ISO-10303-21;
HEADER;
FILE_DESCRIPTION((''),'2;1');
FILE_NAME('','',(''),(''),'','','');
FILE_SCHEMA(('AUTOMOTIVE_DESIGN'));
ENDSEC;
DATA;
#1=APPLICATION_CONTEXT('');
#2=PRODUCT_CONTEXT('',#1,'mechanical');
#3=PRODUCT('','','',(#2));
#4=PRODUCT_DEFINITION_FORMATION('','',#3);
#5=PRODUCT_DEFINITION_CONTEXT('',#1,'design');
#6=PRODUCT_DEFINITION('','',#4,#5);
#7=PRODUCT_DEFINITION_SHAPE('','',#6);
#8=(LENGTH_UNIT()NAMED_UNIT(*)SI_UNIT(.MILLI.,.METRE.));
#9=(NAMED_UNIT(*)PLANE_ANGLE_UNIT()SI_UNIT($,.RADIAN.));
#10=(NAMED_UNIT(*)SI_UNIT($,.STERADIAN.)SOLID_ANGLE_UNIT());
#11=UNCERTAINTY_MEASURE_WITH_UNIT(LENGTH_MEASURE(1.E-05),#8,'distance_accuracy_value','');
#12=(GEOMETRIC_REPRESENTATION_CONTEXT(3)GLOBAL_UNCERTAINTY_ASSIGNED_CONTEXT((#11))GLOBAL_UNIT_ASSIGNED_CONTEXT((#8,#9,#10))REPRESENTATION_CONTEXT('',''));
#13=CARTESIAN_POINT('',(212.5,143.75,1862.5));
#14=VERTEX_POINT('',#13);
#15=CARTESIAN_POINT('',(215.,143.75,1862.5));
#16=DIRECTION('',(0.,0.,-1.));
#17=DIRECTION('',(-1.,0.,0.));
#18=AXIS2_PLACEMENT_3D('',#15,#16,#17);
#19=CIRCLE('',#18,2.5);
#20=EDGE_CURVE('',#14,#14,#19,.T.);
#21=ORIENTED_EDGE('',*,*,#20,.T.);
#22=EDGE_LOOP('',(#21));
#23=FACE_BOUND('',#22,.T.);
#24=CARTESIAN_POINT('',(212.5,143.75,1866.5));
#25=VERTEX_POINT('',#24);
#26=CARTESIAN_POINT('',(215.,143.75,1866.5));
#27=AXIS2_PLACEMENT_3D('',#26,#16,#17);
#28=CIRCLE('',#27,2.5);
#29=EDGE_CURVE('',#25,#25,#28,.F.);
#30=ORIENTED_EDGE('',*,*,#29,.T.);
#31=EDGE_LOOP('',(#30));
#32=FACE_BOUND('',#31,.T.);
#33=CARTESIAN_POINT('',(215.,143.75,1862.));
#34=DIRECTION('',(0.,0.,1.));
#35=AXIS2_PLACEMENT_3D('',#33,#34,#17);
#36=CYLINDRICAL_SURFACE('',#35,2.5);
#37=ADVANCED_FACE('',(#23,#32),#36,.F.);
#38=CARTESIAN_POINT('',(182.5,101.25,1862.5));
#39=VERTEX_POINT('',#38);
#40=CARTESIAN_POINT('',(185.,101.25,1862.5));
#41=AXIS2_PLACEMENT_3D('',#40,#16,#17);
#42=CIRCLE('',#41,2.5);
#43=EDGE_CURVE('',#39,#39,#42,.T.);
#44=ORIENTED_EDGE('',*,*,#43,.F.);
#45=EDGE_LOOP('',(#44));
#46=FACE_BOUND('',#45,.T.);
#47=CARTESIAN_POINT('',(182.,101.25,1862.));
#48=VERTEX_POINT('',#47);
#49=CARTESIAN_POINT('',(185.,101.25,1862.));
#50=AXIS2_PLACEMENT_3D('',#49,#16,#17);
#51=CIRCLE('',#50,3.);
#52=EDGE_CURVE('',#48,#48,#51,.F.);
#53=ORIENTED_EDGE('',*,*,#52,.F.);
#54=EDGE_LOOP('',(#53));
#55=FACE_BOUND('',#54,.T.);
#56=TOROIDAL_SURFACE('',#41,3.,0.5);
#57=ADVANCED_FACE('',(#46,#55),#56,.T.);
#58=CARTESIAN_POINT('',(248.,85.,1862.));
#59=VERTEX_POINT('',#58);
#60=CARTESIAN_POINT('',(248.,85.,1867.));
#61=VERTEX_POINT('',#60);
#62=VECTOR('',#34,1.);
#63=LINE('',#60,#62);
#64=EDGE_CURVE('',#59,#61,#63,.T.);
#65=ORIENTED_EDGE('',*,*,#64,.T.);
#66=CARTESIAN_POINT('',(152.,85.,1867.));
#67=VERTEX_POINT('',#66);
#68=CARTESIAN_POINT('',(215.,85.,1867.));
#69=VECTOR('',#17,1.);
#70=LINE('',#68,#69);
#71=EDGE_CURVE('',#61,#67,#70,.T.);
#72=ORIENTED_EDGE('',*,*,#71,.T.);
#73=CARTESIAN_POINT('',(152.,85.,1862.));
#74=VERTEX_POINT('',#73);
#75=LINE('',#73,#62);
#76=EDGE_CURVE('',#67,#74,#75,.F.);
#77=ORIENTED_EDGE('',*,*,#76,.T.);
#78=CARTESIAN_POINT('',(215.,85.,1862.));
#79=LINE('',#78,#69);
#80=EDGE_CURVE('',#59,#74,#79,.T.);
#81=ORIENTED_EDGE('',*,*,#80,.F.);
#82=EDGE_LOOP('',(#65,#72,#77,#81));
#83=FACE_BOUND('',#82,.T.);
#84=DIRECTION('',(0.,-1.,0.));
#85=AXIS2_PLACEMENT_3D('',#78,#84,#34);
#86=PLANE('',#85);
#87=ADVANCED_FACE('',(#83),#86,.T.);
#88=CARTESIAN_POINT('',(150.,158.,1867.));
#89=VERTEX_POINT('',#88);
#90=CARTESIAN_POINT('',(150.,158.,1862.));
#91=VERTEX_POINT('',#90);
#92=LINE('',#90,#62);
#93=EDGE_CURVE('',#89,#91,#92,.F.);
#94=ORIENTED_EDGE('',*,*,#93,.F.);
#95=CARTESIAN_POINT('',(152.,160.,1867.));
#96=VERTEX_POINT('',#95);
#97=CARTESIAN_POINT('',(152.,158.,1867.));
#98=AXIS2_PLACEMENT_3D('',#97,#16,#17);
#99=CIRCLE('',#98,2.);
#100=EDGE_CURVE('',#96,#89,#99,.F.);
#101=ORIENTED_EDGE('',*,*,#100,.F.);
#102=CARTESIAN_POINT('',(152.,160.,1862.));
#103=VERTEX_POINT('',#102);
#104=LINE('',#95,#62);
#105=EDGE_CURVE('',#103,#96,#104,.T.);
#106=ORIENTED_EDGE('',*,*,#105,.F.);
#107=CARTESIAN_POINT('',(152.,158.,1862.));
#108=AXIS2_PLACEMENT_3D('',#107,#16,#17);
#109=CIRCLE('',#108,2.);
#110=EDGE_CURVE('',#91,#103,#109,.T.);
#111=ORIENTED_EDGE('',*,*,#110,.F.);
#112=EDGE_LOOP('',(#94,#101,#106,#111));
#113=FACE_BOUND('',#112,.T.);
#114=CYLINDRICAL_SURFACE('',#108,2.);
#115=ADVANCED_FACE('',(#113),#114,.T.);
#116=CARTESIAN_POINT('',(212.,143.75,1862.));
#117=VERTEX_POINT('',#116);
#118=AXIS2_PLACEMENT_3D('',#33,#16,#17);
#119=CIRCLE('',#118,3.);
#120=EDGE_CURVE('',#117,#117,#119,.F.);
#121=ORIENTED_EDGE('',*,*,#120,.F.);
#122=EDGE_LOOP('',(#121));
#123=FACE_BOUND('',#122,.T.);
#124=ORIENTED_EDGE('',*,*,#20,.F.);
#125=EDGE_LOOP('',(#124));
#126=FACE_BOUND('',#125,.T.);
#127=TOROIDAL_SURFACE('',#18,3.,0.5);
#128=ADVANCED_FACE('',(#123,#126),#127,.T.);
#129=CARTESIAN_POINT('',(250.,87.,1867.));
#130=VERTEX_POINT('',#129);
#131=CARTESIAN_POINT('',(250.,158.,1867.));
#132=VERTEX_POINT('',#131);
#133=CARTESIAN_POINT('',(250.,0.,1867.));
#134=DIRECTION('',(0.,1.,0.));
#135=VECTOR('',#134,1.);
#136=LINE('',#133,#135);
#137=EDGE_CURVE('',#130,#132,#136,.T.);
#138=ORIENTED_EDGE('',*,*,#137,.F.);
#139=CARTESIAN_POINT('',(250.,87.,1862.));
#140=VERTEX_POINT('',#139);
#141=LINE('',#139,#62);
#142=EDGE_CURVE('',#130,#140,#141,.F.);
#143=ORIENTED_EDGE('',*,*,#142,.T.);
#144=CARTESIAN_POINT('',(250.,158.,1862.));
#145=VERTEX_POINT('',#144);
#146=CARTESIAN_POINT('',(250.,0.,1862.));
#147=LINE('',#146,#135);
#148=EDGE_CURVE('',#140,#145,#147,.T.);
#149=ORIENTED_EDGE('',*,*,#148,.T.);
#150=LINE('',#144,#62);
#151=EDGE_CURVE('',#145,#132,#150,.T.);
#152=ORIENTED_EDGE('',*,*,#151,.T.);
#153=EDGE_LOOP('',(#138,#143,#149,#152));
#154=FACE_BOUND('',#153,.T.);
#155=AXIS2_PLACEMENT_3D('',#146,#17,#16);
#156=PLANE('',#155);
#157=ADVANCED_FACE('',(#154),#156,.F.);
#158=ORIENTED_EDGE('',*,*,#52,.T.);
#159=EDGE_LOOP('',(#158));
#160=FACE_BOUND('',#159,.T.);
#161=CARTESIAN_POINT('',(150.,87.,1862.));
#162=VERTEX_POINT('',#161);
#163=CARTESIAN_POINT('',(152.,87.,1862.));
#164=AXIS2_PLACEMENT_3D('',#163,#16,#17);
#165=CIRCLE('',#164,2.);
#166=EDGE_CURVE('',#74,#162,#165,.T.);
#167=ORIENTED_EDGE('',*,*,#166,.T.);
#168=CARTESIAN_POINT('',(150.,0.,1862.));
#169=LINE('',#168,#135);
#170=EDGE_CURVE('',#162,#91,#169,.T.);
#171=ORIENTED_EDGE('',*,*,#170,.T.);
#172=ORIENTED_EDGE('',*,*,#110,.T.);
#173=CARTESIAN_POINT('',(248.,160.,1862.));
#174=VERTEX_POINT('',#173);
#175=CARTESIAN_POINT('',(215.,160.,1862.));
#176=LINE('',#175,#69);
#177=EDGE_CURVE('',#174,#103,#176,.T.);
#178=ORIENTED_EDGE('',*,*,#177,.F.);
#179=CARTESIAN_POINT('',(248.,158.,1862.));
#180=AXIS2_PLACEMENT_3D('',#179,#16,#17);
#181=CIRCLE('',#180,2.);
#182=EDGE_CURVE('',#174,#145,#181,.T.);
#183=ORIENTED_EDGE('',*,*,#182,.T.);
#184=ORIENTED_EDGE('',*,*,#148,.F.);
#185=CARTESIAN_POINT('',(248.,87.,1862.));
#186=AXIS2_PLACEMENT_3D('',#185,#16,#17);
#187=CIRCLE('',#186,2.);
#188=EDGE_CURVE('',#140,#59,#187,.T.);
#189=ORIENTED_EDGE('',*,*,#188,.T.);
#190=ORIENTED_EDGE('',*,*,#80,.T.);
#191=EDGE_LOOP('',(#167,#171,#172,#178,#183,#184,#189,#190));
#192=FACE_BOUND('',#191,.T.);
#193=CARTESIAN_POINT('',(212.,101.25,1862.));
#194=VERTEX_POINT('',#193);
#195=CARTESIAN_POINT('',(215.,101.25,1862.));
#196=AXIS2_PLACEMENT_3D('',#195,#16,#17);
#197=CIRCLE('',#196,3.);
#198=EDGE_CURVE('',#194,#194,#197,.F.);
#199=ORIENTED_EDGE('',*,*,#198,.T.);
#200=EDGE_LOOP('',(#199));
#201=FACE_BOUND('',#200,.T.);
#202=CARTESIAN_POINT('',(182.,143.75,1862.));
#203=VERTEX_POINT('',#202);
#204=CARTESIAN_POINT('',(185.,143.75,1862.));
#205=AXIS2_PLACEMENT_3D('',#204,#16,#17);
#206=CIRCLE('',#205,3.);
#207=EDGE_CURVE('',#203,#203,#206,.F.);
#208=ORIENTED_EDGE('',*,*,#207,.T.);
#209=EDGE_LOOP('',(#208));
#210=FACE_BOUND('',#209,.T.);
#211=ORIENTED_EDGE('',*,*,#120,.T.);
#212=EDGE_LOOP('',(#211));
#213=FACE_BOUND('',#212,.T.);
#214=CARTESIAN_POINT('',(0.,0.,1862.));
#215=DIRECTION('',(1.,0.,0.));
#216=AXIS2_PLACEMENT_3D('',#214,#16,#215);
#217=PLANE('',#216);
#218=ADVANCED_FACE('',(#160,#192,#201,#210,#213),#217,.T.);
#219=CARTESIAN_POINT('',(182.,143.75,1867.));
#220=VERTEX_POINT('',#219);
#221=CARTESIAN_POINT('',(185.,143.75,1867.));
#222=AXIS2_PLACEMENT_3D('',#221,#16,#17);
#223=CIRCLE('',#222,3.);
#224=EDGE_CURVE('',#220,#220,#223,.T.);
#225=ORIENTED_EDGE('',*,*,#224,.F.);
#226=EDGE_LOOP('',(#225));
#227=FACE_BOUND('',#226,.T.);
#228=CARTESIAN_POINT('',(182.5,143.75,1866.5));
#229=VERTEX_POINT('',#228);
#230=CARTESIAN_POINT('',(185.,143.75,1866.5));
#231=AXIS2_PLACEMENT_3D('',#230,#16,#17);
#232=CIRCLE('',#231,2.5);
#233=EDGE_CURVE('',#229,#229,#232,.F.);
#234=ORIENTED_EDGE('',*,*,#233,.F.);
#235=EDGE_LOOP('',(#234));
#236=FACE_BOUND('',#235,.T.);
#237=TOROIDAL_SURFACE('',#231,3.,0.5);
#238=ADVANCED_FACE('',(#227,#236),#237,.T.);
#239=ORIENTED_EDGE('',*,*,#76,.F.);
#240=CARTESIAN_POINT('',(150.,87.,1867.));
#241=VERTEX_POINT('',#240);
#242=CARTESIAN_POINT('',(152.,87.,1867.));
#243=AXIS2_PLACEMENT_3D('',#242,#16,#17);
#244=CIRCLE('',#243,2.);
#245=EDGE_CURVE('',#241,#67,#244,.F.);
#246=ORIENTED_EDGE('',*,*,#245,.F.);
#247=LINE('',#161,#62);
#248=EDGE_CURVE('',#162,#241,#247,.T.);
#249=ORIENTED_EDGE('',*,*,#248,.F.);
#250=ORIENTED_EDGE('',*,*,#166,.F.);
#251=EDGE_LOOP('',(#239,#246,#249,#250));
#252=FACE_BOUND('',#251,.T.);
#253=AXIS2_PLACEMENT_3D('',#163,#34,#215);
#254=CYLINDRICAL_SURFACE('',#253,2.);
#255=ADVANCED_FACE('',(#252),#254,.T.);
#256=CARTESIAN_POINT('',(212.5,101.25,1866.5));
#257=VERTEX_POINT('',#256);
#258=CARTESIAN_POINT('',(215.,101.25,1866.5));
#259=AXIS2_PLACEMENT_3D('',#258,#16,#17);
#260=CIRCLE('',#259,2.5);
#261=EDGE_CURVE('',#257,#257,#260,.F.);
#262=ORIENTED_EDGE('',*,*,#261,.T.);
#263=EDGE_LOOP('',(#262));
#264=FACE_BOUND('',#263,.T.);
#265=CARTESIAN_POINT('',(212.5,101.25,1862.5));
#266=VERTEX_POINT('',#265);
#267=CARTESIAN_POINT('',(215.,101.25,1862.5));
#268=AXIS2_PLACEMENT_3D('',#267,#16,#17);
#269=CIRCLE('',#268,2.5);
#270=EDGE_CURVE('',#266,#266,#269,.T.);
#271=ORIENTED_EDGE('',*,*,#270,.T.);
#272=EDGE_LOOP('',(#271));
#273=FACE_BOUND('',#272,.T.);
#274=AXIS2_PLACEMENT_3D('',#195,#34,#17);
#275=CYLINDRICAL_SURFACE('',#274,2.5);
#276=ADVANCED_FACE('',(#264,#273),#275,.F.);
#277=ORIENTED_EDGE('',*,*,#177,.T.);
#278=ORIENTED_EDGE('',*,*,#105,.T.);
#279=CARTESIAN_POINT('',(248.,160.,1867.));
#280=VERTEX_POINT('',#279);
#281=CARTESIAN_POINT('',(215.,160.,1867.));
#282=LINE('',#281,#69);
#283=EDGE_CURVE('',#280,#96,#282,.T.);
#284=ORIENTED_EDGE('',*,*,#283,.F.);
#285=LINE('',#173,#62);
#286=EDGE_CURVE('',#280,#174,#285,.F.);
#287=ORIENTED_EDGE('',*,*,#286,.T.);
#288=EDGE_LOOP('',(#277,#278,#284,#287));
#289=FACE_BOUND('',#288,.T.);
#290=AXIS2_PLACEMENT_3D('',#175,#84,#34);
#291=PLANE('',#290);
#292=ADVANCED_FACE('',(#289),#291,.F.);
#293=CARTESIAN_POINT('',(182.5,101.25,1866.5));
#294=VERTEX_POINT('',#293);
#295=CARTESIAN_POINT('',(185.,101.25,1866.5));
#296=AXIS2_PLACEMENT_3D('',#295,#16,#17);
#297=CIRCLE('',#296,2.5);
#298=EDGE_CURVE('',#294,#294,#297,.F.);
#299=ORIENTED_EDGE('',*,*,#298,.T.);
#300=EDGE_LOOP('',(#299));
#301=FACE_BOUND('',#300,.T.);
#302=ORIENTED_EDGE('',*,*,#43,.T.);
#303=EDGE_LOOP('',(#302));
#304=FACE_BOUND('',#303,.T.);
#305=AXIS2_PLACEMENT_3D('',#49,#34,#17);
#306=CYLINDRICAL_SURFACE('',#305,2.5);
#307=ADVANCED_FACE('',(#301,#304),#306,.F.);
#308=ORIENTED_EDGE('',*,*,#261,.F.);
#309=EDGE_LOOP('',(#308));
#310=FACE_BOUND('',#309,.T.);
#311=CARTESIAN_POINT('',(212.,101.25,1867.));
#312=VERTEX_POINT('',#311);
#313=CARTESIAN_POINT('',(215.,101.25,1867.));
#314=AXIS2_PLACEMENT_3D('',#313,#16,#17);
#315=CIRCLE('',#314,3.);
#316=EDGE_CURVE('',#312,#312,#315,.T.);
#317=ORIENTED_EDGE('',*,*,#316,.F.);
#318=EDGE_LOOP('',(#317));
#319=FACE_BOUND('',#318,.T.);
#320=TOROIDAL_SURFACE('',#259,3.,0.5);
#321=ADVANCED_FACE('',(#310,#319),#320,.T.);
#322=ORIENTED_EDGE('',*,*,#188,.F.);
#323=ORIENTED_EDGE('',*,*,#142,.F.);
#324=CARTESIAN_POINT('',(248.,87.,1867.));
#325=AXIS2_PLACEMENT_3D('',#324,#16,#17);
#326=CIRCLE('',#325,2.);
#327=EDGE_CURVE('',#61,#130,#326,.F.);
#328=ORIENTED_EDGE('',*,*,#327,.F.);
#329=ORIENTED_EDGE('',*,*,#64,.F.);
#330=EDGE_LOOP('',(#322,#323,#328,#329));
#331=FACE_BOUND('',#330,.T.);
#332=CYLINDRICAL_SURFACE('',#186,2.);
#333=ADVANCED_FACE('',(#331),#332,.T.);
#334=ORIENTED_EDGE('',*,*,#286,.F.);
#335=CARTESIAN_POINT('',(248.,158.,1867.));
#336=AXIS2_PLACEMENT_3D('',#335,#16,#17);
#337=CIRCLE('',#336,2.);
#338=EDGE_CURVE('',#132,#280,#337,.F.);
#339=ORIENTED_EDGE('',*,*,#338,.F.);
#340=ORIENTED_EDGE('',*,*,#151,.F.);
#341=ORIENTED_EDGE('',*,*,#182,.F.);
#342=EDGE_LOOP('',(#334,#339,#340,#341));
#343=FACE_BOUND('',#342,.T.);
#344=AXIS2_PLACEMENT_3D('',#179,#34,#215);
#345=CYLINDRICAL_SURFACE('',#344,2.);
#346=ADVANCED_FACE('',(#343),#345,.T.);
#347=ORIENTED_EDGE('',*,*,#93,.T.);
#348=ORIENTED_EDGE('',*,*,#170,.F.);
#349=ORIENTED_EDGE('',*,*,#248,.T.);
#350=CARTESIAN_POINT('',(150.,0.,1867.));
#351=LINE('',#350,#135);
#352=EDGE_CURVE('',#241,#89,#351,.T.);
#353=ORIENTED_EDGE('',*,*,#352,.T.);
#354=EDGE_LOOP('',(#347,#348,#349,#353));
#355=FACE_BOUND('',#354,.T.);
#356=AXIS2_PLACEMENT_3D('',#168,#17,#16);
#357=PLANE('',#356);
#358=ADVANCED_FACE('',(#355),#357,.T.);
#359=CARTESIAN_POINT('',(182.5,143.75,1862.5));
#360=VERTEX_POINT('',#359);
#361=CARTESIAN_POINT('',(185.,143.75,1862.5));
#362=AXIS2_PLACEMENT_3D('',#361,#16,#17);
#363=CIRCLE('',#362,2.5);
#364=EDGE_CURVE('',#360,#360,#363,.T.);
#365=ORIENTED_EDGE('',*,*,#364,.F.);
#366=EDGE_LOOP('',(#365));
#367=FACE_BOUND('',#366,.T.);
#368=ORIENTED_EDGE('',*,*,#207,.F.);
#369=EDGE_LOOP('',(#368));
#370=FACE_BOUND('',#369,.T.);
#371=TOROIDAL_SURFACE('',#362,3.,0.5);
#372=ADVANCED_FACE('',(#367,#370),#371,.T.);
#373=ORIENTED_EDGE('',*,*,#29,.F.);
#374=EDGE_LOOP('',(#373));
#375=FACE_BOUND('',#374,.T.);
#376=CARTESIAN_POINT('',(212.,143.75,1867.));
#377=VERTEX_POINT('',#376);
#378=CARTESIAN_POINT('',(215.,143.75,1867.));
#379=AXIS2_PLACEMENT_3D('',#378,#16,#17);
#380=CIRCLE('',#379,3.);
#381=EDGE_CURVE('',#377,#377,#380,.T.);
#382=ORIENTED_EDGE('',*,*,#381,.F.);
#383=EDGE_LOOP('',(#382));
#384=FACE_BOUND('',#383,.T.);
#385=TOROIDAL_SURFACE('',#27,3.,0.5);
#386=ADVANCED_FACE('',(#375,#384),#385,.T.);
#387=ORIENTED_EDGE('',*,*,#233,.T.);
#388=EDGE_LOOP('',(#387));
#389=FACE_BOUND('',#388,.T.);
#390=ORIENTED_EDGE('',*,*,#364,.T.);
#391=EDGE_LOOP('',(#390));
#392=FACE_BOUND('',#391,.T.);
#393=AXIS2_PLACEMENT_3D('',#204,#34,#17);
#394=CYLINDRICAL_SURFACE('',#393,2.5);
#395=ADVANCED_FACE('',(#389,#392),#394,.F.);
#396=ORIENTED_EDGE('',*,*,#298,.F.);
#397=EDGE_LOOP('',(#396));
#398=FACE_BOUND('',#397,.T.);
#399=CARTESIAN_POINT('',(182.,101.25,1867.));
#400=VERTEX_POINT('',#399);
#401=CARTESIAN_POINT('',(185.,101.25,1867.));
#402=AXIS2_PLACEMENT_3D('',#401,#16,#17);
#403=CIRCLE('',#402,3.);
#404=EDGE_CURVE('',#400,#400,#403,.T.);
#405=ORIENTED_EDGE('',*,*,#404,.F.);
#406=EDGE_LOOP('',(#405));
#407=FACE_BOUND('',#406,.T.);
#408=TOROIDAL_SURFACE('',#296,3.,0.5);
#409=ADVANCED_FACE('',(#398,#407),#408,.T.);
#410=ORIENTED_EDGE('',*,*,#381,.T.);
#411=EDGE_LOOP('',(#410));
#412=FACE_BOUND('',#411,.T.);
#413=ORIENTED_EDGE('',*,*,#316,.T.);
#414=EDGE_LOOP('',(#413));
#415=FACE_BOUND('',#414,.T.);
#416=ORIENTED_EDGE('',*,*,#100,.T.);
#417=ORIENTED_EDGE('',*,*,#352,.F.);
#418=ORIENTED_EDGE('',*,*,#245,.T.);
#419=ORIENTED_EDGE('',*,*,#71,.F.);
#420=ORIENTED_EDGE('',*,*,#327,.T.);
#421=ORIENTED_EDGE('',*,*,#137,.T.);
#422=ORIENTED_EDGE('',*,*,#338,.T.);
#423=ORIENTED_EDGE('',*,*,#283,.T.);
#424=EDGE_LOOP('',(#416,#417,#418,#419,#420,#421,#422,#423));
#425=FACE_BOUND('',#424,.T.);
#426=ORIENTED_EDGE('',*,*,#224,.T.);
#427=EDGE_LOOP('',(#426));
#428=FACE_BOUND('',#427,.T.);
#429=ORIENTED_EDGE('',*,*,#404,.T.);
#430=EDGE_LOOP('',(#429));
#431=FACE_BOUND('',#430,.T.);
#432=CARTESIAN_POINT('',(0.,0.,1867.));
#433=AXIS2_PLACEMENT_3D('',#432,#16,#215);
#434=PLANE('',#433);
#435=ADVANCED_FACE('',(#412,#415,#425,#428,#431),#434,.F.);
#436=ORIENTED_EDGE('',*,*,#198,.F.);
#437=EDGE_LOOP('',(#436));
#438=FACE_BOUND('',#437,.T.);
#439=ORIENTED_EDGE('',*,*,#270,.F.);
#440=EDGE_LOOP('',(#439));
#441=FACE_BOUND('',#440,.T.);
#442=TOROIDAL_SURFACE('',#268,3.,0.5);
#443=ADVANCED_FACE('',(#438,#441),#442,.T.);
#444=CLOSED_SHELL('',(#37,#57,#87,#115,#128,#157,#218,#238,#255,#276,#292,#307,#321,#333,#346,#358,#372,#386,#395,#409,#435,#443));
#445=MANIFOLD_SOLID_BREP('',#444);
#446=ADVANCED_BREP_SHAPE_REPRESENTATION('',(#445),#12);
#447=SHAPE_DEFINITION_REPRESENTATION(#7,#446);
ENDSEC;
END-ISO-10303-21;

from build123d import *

# Parameters (mm, degrees)
STOCK_MASTER_BODY_001_1_START     = 1862
STOCK_MASTER_BODY_001_1_OUTLINE_W = 100
STOCK_MASTER_BODY_001_1_OUTLINE_H = 75
STOCK_MASTER_BODY_001_1_OUTLINE_R = 2.5
STOCK_MASTER_BODY_001_1_DEPTH     = 5
FILLET1_R                         = 2
FILLET2_R                         = 0.5


# Read off the part's stored shape, not the designer's step: Stock-master_body_001-1
with BuildPart() as part:
    # Stock-master_body_001-1 outline → Stock-master_body_001-1 (new body)
    with BuildSketch(Plane.XY.offset(STOCK_MASTER_BODY_001_1_START)):
        with Locations((200, 122.5)):
            Rectangle(STOCK_MASTER_BODY_001_1_OUTLINE_W, STOCK_MASTER_BODY_001_1_OUTLINE_H)
        with Locations((185, 101.25)):
            Circle(STOCK_MASTER_BODY_001_1_OUTLINE_R, mode=Mode.SUBTRACT)
        with Locations((215, 101.25)):
            Circle(STOCK_MASTER_BODY_001_1_OUTLINE_R, mode=Mode.SUBTRACT)
        with Locations((185, 143.75)):
            Circle(STOCK_MASTER_BODY_001_1_OUTLINE_R, mode=Mode.SUBTRACT)
        with Locations((215, 143.75)):
            Circle(STOCK_MASTER_BODY_001_1_OUTLINE_R, mode=Mode.SUBTRACT)
    extrude(amount=STOCK_MASTER_BODY_001_1_DEPTH)

    # Fillet1
    fillet1_edges = [part.edges().sort_by_distance(p)[0] for p in [
        (250, 85, 1864.5),
        (150, 85, 1864.5),
        (150, 160, 1864.5),
        (250, 160, 1864.5),
    ]]
    fillet(fillet1_edges, radius=FILLET1_R)

    # Fillet2
    fillet2_edges = [part.edges().sort_by_distance(p)[0] for p in [
        (212.5, 143.75, 1862),
        (212.5, 143.75, 1867),
        (182.5, 143.75, 1862),
        (182.5, 143.75, 1867),
        (182.5, 101.25, 1862),
        (182.5, 101.25, 1867),
        (212.5, 101.25, 1862),
        (212.5, 101.25, 1867),
    ]]
    fillet(fillet2_edges, radius=FILLET2_R)


solid = part.part
